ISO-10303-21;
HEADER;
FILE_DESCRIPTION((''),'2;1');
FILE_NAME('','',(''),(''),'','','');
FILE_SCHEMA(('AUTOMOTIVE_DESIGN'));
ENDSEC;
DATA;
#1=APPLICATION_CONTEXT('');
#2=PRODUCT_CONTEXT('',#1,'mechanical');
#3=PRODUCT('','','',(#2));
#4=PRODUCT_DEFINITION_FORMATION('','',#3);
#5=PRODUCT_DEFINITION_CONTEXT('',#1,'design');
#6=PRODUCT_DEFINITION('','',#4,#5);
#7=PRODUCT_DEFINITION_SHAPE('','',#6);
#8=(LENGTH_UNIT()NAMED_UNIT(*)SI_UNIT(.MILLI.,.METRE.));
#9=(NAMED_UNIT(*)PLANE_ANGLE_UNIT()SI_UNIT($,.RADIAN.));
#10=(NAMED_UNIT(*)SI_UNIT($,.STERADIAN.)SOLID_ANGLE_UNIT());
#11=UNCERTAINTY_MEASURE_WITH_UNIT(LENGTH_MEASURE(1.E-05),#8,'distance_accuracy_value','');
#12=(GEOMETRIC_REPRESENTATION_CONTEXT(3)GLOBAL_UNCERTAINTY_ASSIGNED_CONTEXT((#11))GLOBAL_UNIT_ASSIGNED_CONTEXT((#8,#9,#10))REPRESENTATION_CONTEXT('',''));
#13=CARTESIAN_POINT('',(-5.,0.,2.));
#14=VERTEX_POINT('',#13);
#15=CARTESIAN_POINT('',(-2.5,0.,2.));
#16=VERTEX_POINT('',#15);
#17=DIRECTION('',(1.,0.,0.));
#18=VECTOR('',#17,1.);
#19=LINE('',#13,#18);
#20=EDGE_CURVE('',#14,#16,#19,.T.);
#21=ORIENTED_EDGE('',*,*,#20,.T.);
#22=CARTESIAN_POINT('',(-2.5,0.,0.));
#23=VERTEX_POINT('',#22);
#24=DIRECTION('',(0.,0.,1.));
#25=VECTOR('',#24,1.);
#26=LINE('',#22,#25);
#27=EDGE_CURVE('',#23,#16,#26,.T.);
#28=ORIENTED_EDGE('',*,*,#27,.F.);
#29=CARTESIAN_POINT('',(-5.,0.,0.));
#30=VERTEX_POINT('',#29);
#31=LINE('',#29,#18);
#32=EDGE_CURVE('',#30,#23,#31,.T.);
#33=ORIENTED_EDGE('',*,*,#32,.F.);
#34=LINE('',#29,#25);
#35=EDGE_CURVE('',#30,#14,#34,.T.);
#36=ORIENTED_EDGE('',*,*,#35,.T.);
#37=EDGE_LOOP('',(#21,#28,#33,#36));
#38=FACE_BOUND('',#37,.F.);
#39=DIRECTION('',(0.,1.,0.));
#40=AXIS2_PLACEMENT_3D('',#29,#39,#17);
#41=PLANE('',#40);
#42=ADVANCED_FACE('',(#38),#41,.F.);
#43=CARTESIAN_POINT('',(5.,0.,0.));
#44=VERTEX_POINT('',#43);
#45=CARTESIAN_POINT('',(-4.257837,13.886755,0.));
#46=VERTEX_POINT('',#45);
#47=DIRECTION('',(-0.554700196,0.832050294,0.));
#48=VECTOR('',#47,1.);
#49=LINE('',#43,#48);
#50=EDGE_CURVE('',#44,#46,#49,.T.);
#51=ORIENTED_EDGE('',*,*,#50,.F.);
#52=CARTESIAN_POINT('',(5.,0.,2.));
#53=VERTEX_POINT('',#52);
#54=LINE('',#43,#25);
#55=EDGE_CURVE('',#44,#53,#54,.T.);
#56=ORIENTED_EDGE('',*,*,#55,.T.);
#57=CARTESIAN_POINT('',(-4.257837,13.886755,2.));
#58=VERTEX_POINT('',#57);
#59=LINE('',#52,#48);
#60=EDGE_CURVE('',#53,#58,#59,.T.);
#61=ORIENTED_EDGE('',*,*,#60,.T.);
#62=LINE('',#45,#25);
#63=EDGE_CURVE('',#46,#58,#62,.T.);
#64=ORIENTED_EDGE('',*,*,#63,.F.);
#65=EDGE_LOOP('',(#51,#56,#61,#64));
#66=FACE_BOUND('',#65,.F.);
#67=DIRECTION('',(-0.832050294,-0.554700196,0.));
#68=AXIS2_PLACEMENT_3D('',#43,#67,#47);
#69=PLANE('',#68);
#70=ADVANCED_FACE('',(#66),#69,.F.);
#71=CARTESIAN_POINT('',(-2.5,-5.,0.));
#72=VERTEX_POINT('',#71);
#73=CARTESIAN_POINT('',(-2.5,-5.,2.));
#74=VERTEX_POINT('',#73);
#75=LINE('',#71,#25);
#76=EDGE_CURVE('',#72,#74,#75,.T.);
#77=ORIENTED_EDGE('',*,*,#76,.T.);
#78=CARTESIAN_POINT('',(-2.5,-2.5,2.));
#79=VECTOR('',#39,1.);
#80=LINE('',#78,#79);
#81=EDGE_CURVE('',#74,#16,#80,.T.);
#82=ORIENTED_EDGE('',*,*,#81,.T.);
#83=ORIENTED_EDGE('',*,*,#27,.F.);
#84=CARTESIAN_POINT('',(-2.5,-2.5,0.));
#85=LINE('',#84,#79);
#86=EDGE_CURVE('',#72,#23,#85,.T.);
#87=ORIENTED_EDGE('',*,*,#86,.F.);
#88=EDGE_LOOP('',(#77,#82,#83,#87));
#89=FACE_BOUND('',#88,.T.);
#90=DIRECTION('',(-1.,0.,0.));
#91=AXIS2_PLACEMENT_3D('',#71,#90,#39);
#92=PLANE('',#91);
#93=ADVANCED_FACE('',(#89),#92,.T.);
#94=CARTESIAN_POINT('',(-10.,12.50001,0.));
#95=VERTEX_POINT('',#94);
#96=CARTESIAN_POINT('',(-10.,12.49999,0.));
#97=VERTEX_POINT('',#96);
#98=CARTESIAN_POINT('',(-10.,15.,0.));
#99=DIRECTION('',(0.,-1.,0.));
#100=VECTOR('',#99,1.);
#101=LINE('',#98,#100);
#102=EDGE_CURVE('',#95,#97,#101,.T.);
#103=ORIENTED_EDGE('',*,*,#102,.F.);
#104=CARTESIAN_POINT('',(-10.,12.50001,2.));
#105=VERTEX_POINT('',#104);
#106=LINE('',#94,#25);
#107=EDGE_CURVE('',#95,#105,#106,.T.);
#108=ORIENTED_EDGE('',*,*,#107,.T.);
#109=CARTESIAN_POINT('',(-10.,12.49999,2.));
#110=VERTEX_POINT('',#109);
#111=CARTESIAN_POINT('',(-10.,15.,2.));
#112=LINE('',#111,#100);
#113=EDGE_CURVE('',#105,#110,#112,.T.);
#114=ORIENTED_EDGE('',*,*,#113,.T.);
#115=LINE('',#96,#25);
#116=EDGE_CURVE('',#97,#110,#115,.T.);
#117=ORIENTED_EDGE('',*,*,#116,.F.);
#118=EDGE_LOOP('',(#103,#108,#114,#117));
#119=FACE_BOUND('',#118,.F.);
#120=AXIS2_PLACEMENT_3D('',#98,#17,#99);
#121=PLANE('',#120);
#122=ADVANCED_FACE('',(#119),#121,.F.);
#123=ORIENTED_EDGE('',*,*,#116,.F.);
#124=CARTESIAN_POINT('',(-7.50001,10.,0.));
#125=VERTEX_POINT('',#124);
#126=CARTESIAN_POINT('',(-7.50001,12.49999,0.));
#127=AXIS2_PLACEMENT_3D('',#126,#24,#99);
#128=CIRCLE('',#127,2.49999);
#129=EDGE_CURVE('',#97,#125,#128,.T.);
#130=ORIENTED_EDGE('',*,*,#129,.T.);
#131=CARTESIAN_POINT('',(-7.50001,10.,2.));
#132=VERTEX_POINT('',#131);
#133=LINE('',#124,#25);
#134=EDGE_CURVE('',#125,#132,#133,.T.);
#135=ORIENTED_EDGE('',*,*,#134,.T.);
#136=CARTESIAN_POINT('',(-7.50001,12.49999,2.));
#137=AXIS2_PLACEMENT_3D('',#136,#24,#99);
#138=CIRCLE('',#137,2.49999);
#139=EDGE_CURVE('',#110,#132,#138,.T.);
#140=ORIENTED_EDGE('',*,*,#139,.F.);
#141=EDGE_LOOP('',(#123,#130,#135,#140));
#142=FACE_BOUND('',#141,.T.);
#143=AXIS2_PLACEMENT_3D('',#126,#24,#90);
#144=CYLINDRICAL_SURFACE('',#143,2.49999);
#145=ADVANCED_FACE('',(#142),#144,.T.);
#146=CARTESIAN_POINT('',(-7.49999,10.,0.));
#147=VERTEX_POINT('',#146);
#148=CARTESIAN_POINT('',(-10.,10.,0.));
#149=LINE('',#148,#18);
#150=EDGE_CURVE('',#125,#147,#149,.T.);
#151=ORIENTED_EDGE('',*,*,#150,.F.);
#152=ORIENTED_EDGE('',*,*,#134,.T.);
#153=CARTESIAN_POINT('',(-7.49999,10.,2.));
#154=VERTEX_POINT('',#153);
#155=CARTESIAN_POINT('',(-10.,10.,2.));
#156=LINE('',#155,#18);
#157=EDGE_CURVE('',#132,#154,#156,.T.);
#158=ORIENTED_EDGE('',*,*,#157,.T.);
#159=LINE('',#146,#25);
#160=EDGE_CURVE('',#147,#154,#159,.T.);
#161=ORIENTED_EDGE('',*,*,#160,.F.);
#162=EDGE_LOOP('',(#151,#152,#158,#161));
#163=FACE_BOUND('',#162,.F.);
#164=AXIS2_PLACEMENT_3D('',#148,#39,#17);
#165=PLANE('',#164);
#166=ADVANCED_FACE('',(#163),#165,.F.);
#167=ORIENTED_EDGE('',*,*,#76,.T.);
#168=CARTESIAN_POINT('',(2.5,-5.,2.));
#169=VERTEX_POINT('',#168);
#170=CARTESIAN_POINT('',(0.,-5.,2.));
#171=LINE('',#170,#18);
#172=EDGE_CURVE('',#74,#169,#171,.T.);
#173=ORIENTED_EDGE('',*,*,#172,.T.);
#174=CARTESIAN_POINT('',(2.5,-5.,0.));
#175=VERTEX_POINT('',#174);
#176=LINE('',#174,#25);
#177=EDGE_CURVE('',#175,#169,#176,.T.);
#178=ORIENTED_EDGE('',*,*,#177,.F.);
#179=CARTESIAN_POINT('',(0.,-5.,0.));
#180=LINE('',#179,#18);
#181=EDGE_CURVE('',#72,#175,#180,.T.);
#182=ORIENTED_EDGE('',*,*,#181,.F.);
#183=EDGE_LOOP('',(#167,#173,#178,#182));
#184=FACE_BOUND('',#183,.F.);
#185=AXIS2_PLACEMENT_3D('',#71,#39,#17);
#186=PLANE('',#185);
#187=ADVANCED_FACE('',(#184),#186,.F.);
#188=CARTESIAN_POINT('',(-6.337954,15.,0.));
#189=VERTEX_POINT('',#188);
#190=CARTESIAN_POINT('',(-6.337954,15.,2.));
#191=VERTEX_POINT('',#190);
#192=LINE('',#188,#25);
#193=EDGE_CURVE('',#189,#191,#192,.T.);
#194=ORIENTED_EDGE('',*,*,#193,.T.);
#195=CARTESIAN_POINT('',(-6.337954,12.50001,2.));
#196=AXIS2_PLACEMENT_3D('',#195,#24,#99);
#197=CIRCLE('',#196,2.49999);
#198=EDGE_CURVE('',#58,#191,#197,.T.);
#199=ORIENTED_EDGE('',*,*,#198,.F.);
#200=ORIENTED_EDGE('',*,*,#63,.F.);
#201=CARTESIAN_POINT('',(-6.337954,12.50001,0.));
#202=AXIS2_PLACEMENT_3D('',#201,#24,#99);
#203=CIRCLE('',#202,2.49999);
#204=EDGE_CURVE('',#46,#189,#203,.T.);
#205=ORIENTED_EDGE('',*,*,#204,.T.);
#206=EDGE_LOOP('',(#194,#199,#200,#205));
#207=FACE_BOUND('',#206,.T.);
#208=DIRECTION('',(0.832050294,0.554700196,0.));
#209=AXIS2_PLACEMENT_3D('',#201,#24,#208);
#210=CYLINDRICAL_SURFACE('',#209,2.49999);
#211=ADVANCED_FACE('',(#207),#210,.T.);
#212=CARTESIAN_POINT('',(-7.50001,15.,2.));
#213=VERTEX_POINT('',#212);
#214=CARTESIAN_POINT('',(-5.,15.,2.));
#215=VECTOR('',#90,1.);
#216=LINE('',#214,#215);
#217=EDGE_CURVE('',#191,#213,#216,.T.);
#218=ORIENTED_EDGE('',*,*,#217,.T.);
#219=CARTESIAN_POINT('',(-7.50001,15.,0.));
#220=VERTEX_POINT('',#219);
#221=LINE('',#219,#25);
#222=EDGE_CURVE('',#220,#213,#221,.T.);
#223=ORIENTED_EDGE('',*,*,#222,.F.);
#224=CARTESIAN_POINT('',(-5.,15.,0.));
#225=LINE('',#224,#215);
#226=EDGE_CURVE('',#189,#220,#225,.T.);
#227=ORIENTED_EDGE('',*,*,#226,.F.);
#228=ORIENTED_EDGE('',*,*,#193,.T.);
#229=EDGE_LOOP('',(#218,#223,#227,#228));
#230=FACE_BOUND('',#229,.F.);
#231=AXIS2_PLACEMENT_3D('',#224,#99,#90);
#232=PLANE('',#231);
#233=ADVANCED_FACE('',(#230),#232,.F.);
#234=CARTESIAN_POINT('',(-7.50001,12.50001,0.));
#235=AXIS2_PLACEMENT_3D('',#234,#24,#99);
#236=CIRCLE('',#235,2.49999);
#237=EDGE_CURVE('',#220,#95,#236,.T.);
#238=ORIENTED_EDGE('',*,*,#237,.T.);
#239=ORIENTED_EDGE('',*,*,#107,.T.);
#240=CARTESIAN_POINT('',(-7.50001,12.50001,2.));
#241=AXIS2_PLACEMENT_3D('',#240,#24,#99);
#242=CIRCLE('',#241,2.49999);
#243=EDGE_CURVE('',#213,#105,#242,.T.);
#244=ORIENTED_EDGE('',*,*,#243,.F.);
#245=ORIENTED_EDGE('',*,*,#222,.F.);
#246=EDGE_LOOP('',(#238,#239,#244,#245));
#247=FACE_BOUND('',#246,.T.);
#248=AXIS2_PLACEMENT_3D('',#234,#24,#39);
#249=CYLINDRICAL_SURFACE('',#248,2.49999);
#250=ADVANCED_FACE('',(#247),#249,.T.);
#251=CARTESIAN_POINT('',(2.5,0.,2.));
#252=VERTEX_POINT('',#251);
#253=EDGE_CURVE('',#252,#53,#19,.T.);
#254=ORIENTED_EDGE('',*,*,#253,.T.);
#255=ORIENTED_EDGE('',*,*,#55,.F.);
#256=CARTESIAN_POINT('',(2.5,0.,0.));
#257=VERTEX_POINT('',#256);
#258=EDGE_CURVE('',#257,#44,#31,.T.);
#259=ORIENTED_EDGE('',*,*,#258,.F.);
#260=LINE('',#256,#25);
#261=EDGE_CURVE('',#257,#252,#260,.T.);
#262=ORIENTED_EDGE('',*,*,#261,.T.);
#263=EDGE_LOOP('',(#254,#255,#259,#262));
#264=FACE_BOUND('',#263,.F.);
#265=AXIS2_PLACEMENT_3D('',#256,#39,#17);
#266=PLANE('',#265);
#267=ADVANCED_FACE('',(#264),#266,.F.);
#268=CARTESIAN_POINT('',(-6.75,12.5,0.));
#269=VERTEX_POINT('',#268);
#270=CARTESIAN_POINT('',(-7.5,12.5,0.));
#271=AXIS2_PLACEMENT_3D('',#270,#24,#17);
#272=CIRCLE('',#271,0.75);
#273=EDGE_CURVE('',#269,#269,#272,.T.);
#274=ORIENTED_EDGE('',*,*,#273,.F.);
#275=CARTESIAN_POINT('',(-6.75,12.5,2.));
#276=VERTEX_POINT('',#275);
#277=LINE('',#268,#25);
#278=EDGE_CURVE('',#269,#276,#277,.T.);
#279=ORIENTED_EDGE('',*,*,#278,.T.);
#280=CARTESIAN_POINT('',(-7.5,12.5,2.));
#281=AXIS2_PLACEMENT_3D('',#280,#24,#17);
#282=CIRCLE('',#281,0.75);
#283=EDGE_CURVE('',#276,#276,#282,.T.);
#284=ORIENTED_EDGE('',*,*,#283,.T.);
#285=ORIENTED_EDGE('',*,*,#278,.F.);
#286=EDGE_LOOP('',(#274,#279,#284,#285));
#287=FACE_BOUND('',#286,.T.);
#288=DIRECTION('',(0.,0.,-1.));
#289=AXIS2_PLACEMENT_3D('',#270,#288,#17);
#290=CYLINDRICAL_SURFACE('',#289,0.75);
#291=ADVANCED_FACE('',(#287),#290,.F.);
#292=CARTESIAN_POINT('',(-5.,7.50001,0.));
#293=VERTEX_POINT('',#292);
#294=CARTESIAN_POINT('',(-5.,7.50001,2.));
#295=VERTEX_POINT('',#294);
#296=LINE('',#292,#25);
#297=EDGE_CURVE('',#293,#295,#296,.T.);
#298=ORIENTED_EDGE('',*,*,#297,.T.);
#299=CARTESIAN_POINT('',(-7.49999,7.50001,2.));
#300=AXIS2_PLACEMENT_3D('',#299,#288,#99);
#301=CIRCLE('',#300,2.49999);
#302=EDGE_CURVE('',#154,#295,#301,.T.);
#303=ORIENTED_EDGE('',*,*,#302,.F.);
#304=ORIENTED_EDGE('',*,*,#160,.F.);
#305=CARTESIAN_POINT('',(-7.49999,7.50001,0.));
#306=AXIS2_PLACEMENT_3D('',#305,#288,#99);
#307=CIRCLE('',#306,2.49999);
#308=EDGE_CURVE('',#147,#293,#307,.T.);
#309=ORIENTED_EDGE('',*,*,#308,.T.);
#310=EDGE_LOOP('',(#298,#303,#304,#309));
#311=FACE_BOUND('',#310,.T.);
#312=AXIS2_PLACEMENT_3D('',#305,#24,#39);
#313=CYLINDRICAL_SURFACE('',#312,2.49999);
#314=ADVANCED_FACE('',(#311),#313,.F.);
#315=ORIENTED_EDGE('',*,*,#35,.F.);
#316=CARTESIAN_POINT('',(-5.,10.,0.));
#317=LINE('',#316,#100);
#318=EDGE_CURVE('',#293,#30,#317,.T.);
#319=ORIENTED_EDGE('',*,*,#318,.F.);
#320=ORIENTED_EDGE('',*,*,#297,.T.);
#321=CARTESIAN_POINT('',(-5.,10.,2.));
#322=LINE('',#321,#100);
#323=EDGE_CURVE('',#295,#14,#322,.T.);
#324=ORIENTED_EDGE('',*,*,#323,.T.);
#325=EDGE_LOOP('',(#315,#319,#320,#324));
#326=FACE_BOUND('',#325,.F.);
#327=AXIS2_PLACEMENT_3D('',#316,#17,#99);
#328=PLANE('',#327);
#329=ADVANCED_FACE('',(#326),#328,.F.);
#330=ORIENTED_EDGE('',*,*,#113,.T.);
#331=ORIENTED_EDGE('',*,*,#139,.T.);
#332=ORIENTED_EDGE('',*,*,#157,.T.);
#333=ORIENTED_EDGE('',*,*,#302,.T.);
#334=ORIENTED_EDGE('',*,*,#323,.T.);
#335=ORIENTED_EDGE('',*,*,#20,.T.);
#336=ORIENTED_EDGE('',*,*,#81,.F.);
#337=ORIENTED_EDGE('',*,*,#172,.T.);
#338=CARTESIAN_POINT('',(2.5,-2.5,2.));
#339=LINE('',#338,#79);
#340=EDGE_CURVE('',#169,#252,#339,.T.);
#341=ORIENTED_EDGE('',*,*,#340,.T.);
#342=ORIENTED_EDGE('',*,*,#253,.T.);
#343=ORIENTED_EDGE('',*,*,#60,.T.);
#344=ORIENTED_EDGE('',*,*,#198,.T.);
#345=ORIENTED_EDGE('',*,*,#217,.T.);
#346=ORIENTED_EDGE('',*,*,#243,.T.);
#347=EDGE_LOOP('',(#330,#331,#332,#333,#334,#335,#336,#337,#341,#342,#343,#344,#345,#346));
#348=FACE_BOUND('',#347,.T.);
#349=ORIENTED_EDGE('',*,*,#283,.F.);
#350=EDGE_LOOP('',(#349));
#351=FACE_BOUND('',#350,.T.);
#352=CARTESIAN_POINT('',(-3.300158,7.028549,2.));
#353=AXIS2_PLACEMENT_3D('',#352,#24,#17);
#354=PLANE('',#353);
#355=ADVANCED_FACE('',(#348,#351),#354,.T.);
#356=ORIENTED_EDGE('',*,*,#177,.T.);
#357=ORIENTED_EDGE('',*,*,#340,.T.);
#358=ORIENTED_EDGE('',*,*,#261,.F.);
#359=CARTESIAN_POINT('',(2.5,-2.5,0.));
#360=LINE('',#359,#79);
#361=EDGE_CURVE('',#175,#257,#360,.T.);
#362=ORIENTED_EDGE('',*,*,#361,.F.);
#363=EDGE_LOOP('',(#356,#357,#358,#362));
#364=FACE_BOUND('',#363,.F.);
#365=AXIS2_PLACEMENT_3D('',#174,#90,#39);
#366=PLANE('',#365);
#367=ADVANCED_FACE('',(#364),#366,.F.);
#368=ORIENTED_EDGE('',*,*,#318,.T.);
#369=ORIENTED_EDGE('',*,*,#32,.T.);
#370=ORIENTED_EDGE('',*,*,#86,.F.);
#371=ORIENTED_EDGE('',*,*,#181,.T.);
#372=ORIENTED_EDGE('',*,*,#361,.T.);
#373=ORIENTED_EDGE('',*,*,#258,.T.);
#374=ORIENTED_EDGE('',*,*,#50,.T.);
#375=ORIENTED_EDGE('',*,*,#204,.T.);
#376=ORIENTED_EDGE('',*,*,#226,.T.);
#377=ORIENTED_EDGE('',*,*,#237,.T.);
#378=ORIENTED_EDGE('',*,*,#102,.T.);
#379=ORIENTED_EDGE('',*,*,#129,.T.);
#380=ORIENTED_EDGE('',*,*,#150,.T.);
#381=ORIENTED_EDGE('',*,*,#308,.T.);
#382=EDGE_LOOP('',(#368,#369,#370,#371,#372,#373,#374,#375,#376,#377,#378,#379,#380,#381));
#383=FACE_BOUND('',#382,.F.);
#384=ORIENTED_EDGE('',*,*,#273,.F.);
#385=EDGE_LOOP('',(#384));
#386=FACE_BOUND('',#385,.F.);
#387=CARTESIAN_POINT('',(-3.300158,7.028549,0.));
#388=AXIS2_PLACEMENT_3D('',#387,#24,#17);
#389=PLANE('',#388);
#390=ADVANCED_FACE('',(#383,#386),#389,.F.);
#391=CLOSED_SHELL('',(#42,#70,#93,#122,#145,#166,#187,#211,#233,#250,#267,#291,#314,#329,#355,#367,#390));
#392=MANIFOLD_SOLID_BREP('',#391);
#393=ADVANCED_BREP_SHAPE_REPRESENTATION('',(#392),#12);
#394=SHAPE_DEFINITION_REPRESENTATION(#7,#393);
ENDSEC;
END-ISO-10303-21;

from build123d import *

# Parameters (mm, degrees)
F0_R     = 0.75
F0_W     = 5
F0_H     = 5
F1_DEPTH = 2
F2_R     = 2.49999


# Not quite as in the source:
# - a fillet or chamfer is up to 0.001 mm smaller than in the source, because OpenCascade refuses the exact size


with BuildPart() as f1:
    # F0 (on Top) → F1 (new body)
    with BuildSketch(Plane.XY):
        Polygon((-5, 0), (-2.5, 0), (2.5, 0), (5, 0), (-5, 15), (-10, 15), (-10, 10), (-5, 10), align=None)
        with Locations((-7.5, 12.5)):
            Circle(F0_R, mode=Mode.SUBTRACT)
        with Locations((0, -2.5)):
            Rectangle(F0_W, F0_H)
    extrude(amount=F1_DEPTH)

    # F2 (radius 2.5 in the source; OpenCascade refuses exactly that, so slightly less here)
    f2_edges = [f1.edges().sort_by_distance(p)[0] for p in [
        (-10, 15, 1),
        (-10, 10, 1),
        (-5, 15, 1),
        (-5, 10, 1),
    ]]
    fillet(f2_edges, radius=F2_R)


solid = f1.part
